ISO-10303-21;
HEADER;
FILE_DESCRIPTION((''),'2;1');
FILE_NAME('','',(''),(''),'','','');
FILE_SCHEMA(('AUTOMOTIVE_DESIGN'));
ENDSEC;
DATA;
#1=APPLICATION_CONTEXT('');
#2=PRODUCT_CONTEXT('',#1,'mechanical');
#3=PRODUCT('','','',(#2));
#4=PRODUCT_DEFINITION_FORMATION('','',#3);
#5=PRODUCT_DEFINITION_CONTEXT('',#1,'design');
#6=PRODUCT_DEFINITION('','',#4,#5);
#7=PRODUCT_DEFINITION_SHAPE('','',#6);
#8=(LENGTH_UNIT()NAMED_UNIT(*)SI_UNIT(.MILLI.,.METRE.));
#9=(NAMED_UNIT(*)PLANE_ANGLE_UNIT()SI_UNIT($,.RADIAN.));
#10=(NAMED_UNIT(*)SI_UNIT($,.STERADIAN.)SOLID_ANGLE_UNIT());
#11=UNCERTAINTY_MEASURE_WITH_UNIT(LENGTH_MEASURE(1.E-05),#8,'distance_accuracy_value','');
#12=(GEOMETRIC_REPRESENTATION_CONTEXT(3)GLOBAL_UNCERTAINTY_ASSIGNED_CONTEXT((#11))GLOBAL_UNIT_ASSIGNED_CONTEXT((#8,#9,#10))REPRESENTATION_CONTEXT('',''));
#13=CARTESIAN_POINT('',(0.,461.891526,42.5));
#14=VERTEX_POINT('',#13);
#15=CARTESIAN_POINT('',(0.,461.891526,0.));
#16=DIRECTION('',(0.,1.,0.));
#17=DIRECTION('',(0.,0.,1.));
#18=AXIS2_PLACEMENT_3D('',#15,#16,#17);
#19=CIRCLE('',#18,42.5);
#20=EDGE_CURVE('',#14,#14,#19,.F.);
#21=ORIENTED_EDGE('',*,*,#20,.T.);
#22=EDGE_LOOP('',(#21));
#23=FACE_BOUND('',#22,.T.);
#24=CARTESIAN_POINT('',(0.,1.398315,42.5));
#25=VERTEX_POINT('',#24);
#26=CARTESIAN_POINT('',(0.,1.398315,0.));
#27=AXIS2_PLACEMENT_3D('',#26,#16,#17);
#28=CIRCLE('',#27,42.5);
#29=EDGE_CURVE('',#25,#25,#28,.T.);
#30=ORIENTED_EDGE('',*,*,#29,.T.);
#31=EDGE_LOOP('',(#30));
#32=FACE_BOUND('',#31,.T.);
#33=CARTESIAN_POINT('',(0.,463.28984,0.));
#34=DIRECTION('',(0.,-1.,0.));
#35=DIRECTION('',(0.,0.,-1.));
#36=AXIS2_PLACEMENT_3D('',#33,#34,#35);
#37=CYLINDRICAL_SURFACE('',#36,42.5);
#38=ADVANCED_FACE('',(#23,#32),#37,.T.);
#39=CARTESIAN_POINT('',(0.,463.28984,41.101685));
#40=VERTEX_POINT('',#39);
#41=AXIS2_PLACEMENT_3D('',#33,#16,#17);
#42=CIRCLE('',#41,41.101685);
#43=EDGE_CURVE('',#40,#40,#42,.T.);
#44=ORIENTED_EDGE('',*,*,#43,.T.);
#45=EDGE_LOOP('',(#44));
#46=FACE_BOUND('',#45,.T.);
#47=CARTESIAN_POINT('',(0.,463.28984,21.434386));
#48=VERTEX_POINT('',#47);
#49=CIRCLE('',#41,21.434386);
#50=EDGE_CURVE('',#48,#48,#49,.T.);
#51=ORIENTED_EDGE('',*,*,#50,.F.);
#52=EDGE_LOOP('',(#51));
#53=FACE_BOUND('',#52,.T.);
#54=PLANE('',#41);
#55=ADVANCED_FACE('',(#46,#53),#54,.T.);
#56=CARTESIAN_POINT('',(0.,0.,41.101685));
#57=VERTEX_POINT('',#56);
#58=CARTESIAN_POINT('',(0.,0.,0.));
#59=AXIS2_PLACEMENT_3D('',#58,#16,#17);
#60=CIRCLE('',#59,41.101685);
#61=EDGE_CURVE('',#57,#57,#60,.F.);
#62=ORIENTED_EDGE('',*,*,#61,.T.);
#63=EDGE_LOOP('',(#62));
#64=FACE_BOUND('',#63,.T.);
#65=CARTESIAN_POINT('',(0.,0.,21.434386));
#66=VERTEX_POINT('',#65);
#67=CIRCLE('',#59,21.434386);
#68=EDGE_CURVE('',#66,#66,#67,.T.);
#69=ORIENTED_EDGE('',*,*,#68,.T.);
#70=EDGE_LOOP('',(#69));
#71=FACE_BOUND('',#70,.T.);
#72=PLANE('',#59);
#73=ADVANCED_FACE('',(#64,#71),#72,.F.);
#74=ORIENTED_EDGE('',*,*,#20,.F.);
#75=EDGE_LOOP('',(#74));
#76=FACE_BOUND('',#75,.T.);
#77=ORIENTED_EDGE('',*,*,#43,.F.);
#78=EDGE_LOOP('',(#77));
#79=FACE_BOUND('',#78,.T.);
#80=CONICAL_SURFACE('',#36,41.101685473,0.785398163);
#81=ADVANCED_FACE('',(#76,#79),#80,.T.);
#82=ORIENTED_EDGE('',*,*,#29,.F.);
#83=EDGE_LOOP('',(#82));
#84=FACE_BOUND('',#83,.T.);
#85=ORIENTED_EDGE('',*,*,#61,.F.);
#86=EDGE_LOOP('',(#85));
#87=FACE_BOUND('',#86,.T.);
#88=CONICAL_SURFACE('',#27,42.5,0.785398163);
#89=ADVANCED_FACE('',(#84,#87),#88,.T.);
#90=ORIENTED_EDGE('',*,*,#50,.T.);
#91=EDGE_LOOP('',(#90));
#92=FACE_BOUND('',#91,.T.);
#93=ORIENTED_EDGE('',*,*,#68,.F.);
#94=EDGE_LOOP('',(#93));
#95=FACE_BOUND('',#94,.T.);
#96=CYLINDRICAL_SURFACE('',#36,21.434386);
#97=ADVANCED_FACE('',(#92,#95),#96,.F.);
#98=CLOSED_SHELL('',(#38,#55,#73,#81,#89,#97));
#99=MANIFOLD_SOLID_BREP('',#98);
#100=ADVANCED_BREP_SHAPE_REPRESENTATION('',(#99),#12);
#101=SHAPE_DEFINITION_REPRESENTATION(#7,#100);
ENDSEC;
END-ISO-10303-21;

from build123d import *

# Parameters (mm, degrees)
SKETCH1_R           = 42.5
BOSS_EXTRUDE1_DEPTH = 463.289840388
SKETCH2_R           = 21.434386418
CUT_EXTRUDE1_DEPTH  = 468.172319606
CHAMFER1_SIZE       = 1.398314527


with BuildPart() as part:
    # Sketch1 → Boss-Extrude1 (new body)
    with BuildSketch(Plane(origin=(0, 0, 0), x_dir=(1, 0, 0), z_dir=(0, 1, 0))):
        Circle(SKETCH1_R)
    extrude(amount=BOSS_EXTRUDE1_DEPTH)

    # Sketch2 → Cut-Extrude1 (cut, through all)
    with BuildSketch(Plane(origin=(0, 0, 0), x_dir=(1, 0, 0), z_dir=(0, 1, 0))):
        Circle(SKETCH2_R)
    extrude(amount=CUT_EXTRUDE1_DEPTH, mode=Mode.SUBTRACT)

    # Chamfer1
    chamfer1_edges = [part.edges().sort_by_distance(p)[0] for p in [
        (-42.5, 463.289840388, 0),
        (-42.5, 0, 0),
    ]]
    chamfer(chamfer1_edges, length=CHAMFER1_SIZE)


solid = part.part
